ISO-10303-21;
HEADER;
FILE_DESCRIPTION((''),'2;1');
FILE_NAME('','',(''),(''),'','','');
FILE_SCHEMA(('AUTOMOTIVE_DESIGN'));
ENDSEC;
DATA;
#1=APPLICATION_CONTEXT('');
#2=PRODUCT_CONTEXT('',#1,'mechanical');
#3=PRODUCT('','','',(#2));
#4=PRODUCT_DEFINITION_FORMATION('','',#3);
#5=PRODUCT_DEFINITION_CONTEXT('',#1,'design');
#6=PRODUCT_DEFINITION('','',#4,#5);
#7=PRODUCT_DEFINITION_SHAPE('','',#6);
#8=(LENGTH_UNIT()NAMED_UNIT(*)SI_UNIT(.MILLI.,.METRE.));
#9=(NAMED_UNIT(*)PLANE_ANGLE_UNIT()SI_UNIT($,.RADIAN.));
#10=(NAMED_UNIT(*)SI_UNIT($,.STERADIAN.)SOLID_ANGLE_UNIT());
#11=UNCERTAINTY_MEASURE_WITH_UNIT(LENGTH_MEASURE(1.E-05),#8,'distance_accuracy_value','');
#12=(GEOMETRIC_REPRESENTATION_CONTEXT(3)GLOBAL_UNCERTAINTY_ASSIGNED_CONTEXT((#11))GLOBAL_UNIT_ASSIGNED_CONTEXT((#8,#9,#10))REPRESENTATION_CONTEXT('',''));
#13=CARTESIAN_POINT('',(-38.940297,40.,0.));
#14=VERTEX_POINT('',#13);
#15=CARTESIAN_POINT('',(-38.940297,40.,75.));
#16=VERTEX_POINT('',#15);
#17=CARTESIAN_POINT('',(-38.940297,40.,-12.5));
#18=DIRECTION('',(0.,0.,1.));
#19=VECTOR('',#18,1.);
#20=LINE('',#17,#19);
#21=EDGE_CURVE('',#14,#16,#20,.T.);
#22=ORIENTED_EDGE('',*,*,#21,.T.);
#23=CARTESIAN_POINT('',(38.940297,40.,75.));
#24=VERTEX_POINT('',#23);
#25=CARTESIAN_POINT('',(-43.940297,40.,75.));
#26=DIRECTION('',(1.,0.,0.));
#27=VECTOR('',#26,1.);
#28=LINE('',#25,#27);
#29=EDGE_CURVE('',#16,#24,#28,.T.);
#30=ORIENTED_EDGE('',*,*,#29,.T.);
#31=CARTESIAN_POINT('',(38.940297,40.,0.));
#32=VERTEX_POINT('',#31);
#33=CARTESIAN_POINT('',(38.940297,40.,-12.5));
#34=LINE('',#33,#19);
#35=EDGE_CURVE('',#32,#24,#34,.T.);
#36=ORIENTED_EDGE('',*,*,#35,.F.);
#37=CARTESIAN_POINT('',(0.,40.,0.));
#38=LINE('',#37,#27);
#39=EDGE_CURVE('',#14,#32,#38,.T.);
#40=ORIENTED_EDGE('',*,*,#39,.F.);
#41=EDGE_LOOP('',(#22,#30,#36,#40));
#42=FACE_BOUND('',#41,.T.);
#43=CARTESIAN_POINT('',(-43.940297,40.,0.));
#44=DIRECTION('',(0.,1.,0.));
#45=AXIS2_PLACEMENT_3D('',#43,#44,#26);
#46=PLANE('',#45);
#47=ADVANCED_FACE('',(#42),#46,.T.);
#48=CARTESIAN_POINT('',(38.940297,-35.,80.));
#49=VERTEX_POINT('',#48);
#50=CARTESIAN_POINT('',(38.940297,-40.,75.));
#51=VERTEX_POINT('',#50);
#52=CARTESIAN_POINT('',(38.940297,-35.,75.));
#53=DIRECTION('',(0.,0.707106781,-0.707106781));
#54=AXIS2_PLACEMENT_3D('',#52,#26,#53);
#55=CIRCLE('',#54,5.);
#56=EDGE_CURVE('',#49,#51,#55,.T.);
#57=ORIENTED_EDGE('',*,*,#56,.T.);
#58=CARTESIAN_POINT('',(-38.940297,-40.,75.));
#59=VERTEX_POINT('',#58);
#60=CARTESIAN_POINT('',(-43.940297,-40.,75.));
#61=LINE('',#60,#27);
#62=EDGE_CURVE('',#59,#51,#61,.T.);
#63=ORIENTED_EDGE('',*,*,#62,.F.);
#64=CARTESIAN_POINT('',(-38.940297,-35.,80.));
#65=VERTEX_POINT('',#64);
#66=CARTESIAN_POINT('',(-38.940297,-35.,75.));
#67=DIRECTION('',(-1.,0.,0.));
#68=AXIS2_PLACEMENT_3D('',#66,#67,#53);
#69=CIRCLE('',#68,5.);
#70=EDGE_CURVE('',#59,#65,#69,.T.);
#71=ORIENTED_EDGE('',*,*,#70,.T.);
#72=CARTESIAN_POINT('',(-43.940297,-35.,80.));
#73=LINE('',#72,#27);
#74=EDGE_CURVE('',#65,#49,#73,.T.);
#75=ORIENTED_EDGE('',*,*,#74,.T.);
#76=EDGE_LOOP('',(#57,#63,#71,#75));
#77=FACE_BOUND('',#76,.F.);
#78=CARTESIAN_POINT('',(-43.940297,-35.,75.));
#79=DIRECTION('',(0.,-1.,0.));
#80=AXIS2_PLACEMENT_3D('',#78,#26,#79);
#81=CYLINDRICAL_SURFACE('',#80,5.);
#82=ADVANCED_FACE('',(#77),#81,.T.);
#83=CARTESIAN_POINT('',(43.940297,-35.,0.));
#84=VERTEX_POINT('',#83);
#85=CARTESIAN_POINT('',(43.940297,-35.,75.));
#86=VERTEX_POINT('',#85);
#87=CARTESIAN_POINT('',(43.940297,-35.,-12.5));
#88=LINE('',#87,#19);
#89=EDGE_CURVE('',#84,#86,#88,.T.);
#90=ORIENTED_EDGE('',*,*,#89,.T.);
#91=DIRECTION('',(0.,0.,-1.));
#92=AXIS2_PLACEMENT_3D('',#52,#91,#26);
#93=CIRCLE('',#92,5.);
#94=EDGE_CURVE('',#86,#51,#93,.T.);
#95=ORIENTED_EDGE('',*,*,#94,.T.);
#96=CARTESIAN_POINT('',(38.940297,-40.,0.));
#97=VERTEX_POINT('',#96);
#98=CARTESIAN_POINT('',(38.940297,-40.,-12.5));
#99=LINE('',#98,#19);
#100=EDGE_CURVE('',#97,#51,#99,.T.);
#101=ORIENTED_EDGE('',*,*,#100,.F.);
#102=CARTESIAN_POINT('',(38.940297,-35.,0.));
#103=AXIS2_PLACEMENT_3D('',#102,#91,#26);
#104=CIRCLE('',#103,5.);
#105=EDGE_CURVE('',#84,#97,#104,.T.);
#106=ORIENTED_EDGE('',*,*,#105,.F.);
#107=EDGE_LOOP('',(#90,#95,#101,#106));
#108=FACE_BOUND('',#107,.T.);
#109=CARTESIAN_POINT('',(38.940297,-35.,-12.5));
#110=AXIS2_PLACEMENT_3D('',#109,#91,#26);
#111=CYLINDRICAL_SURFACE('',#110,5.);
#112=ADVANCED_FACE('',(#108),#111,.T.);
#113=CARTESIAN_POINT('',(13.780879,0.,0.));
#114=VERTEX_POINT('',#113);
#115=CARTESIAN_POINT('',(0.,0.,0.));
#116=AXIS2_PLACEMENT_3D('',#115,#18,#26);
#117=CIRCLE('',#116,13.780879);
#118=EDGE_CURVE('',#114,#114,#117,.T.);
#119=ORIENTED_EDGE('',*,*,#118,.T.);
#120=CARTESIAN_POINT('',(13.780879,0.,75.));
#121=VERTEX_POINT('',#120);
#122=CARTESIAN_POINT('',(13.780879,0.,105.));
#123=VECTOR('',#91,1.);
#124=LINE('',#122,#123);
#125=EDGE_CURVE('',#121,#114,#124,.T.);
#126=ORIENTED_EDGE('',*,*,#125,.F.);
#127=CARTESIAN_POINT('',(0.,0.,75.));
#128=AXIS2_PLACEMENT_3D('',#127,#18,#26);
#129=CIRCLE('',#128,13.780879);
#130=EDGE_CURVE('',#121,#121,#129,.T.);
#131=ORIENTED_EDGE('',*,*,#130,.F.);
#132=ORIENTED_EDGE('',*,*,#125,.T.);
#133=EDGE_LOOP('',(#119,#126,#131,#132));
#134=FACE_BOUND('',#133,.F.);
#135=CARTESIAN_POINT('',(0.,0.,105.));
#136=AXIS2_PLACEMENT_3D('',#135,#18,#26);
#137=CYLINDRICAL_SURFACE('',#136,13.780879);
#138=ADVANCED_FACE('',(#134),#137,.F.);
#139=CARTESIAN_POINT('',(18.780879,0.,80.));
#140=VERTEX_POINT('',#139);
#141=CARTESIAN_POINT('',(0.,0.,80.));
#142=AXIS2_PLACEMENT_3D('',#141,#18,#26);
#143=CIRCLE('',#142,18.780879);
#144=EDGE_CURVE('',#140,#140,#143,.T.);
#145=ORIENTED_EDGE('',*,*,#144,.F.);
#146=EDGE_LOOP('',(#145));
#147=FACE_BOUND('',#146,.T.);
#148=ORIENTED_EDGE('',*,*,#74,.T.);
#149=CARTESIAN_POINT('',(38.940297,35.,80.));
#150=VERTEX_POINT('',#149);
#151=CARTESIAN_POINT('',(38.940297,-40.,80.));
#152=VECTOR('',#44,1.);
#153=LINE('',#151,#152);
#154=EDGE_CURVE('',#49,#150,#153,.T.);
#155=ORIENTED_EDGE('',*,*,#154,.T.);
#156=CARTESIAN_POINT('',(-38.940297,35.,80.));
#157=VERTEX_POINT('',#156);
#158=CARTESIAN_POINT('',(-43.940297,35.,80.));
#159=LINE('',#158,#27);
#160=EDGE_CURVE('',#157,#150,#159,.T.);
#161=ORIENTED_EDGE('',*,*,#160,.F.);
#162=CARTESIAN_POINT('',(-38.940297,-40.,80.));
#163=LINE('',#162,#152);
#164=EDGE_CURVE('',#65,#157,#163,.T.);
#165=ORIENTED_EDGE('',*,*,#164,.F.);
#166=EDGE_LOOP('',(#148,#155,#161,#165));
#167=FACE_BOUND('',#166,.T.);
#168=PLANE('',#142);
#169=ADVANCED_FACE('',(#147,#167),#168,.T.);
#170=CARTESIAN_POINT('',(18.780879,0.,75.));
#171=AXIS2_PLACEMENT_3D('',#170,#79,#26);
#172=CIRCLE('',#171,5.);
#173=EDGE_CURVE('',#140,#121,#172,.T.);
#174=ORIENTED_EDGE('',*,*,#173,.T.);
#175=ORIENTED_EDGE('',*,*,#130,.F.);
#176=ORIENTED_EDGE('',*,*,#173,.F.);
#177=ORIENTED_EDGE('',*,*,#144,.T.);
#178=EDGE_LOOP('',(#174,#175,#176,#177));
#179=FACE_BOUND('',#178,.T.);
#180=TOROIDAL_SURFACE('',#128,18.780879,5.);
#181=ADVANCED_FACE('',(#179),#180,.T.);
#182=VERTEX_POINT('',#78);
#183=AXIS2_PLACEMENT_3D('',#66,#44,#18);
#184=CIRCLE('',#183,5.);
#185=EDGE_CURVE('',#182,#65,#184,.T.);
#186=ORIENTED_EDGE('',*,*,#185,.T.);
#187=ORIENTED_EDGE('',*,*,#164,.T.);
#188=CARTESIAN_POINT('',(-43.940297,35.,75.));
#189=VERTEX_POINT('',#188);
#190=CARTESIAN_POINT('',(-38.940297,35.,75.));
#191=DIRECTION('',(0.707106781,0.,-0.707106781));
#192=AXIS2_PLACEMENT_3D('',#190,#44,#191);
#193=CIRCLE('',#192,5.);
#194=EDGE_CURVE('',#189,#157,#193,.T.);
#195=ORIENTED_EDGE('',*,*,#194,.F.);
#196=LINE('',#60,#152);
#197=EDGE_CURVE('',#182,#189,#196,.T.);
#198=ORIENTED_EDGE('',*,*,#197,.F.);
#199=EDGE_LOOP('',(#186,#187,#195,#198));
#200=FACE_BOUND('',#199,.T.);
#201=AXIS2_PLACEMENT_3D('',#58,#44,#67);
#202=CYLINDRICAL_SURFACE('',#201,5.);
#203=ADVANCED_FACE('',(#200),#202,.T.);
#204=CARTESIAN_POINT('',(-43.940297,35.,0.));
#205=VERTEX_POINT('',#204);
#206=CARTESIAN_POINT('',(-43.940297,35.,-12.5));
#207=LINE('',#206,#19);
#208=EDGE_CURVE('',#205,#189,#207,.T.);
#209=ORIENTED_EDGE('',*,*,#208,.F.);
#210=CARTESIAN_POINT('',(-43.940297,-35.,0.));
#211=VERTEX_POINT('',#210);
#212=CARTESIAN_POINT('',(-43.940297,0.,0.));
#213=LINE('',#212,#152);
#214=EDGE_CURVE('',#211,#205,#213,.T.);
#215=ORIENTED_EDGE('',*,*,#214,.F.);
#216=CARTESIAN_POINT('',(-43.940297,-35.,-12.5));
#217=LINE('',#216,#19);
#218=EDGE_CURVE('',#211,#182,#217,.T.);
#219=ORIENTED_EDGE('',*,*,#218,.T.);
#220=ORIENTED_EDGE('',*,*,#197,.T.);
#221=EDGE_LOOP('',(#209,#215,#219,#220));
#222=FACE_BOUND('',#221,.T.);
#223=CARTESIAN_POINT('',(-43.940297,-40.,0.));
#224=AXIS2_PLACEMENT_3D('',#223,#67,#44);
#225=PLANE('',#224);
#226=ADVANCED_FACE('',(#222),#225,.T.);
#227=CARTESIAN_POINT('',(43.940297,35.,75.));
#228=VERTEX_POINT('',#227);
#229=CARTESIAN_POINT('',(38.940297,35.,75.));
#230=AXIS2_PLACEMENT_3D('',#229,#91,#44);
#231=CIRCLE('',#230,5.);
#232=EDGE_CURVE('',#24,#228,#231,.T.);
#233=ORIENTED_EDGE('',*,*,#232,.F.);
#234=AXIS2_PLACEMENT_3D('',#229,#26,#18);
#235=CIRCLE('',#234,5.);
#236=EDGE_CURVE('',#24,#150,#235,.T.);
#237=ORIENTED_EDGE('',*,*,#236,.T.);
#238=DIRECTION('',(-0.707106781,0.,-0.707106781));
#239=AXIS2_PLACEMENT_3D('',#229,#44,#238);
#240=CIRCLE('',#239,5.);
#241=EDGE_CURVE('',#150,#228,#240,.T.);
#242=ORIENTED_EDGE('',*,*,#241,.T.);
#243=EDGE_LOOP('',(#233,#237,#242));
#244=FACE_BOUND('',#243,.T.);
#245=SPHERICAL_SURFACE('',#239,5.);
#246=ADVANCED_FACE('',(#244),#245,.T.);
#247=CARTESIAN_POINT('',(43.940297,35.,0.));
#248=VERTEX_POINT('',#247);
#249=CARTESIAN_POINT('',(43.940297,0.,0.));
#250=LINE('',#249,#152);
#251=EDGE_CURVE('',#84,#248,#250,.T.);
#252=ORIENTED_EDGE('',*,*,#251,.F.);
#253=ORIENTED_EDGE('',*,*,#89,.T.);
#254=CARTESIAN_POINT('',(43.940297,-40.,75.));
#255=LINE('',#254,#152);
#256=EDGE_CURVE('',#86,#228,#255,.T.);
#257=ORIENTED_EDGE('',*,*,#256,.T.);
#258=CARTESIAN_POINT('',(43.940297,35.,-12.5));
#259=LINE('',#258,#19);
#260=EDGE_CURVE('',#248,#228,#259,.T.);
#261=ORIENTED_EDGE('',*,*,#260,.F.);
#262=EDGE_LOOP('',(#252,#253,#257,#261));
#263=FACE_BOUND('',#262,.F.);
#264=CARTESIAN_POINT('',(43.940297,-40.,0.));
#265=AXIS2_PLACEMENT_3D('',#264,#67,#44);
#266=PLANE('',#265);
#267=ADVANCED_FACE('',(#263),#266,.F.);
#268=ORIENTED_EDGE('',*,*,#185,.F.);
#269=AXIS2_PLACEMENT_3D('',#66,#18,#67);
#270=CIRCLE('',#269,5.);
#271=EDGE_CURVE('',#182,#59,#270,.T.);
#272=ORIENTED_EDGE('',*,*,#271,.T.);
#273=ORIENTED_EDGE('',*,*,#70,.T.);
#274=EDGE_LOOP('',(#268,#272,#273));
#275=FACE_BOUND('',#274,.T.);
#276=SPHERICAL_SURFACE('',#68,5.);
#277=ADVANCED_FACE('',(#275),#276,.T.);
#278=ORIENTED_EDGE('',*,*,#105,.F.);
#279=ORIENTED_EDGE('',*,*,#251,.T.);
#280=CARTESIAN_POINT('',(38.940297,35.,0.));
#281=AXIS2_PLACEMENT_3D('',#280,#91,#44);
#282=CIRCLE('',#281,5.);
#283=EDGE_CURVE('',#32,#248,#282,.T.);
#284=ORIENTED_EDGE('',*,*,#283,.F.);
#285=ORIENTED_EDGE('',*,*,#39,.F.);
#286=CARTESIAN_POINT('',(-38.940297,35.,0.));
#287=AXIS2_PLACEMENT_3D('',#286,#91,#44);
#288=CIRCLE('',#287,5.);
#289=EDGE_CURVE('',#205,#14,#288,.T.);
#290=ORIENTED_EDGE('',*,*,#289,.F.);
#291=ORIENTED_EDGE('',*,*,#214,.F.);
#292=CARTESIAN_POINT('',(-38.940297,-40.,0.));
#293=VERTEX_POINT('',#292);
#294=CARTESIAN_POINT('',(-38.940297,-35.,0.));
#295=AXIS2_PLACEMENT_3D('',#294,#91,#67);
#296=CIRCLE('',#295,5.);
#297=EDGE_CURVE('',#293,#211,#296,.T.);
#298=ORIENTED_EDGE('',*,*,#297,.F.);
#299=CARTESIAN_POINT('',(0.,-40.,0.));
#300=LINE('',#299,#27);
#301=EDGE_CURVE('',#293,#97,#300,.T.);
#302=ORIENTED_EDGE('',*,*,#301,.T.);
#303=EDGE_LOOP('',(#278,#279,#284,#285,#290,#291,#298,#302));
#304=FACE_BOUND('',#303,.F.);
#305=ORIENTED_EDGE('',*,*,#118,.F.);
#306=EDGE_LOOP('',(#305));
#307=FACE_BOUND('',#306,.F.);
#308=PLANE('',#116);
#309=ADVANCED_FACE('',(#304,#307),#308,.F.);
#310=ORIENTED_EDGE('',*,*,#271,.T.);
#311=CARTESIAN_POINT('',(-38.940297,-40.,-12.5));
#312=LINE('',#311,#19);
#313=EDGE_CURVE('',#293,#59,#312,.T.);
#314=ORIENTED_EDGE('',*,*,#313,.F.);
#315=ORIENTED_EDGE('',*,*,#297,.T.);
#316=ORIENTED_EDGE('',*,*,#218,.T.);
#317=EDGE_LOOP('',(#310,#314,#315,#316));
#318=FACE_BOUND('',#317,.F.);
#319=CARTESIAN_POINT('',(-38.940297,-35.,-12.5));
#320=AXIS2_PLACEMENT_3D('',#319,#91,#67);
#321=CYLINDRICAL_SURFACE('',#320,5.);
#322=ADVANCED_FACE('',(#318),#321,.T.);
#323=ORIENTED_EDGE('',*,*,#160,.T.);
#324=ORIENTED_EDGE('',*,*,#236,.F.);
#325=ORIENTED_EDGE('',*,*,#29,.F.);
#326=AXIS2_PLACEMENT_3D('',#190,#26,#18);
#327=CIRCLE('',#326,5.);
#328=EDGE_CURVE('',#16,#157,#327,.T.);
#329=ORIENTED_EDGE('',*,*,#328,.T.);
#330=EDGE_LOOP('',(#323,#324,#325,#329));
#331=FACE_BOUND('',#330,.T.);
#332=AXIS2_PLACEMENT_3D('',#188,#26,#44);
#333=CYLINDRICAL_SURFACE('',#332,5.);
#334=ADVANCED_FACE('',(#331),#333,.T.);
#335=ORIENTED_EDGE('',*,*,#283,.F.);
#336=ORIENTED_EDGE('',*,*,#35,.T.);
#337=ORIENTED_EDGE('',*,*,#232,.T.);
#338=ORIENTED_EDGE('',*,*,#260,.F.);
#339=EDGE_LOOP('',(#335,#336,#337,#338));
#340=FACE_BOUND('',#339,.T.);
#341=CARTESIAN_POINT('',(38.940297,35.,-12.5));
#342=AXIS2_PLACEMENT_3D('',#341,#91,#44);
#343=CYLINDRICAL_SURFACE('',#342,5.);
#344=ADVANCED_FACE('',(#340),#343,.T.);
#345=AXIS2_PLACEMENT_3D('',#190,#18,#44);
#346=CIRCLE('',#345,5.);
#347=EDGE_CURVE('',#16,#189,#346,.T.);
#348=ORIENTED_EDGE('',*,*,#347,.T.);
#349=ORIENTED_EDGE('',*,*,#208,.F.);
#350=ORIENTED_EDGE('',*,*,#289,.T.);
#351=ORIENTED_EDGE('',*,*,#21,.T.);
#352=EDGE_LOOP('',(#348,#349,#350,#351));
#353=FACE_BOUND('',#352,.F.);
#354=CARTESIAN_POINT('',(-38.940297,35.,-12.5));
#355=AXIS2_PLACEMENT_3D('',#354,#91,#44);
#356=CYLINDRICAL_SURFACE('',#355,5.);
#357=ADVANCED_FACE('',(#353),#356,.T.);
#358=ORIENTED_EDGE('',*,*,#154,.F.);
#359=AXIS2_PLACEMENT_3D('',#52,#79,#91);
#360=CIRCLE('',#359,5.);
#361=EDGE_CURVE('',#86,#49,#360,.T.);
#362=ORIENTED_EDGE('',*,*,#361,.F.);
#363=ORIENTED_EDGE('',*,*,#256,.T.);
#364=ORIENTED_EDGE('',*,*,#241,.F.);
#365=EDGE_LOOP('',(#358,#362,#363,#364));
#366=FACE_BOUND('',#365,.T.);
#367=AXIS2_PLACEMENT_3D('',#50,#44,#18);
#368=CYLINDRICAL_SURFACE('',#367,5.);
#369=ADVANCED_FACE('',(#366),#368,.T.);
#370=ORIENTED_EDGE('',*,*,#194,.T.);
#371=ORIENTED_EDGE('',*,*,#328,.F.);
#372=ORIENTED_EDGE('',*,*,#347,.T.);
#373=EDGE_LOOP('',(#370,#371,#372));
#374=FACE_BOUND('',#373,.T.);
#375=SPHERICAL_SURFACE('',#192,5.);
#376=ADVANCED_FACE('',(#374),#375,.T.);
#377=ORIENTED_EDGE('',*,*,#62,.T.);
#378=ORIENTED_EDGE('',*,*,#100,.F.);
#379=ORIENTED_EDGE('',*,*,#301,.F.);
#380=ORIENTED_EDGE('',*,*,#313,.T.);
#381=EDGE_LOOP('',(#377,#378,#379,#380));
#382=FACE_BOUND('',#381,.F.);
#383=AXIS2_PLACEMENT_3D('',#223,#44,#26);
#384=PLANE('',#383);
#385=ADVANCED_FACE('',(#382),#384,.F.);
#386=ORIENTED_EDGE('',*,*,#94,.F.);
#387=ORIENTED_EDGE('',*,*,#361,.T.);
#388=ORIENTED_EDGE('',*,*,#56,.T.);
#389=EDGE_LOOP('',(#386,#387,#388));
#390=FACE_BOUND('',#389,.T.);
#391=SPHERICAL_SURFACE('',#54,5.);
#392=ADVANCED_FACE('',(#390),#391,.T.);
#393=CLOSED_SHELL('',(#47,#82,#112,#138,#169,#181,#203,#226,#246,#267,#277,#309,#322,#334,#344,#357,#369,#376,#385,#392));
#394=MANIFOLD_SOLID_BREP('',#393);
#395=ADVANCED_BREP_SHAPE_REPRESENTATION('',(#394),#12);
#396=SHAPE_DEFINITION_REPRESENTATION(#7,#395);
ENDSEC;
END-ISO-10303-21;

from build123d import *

# Parameters (mm, degrees)
F0_W          = 87.8805932263
F0_H          = 80
F1_DEPTH      = 80
F2_R          = 13.7808794965
F3_DEPTH      = 25
F4_R          = 13.7808794965
F7_DEPTH      = 25
F5_R          = 13.7808794965
F8_DEPTH      = 25
F6_R          = 13.7808794965
F9_DEPTH      = 105.001
F10_R         = 5
F11_T1_DEPTH  = 87.5
F11_S5_W      = 5
F11_S5_H      = 5
F11_T6_DEPTH  = 5
F11_S11_W     = 5
F11_S11_H     = 5
F11_T12_DEPTH = 5
F11_S17_W     = 5
F11_S17_H     = 5
F11_T18_DEPTH = 5
F11_S23_W     = 5
F11_S23_H     = 5
F11_T24_DEPTH = 5


# Not quite as in the source:
# - a fillet or chamfer that OpenCascade refuses, or shapes differently, is made with other operations: its cross-section is extruded or revolved along the edge and cut away or added


with BuildPart() as f1:
    # F0 (on Top) → F1 (new body)
    with BuildSketch(Plane.XY):
        Rectangle(F0_W, F0_H)
    extrude(amount=F1_DEPTH)

    # F2 (on face) → F3 (join)
    with BuildSketch(Plane.XY.offset(80)):
        Circle(F2_R)
    extrude(amount=F3_DEPTH)

    # F4 (on face) → F7 (cut)
    with BuildSketch(Plane.XY.offset(105)):
        Circle(F4_R)
    extrude(amount=-F7_DEPTH, mode=Mode.SUBTRACT)

    # F5 (on face) → F8 (cut)
    with BuildSketch(Plane.XY):
        Circle(F5_R)
    extrude(amount=-F8_DEPTH, mode=Mode.SUBTRACT)

    # F6 (on face) → F9 (cut, through all)
    with BuildSketch(Plane.XY.offset(105)):
        Circle(F6_R)
    extrude(amount=-F9_DEPTH, mode=Mode.SUBTRACT)

    # F10
    f10_edges = [f1.edges().sort_by_distance(p)[0] for p in [
        (0, 40, 80),
        (43.940297, 0, 80),
        (-43.940297, 0, 80),
        (0, -40, 80),
        (-13.780879, 0, 80),
    ]]
    fillet(f10_edges, radius=F10_R)

    # F11: fillet of radius 5 on 15 edges, made by hand

    # F11_s2 → F11_t1 (cut)
    with BuildSketch(Plane.XY.offset(-12.5)):
        with BuildLine():
            ThreePointArc((-43.9402966131, -35), (-42.4758305191, -38.5355339059), (-38.9402966131, -40))
            Line((-38.9402966131, -40), (-43.9402966131, -40))
            Line((-43.9402966131, -40), (-43.9402966131, -35))
        make_face()
        with BuildLine():
            ThreePointArc((43.9402966131, -35), (42.4758305191, -38.5355339059), (38.9402966131, -40))
            Line((38.9402966131, -40), (43.9402966131, -40))
            Line((43.9402966131, -40), (43.9402966131, -35))
        make_face()
        with BuildLine():
            ThreePointArc((-38.9402966131, 40), (-42.4758305191, 38.5355339059), (-43.9402966131, 35))
            Line((-43.9402966131, 35), (-43.9402966131, 40))
            Line((-43.9402966131, 40), (-38.9402966131, 40))
        make_face()
        with BuildLine():
            ThreePointArc((38.9402966131, 40), (42.4758305191, 38.5355339059), (43.9402966131, 35))
            Line((43.9402966131, 35), (43.9402966131, 40))
            Line((43.9402966131, 40), (38.9402966131, 40))
        make_face()
    extrude(amount=F11_T1_DEPTH, mode=Mode.SUBTRACT)


with BuildPart() as f11_tool4:
    # F11_s5 → F11_t6 (new body)
    with BuildSketch(Plane.XZ.offset(-35)):
        with Locations((41.4402966131, 77.5)):
            Rectangle(F11_S5_W, F11_S5_H)
    extrude(amount=-F11_T6_DEPTH)

    # F11_s7 → F11_t8 (revolve, cut)
    with BuildSketch(Plane(origin=(38.9402966131, 35, 75), x_dir=(-0.7071067812, 0, -0.7071067812), z_dir=(0.7071067812, 0, -0.7071067812))):
        with BuildLine():
            ThreePointArc((0, -5), (5, 0), (0, 5))
            Line((0, 5), (0, -5))
        make_face()
    revolve(axis=Axis((38.9402966131, 35, 75), (0, 1, 0)), mode=Mode.SUBTRACT)


with BuildPart() as f1_1:
    add(f1.part)

    # F11_t3: cut F11_tool4
    add(f11_tool4.part, mode=Mode.SUBTRACT)


with BuildPart() as f11_tool10:
    # F11_s11 → F11_t12 (new body)
    with BuildSketch(Plane.XZ.offset(-35)):
        with Locations((-41.4402966131, 77.5)):
            Rectangle(F11_S11_W, F11_S11_H)
    extrude(amount=-F11_T12_DEPTH)

    # F11_s13 → F11_t14 (revolve, cut)
    with BuildSketch(Plane(origin=(-38.9402966131, 35, 75), x_dir=(0.7071067812, 0, -0.7071067812), z_dir=(0.7071067812, 0, 0.7071067812))):
        with BuildLine():
            ThreePointArc((0, -5), (5, 0), (0, 5))
            Line((0, 5), (0, -5))
        make_face()
    revolve(axis=Axis((-38.9402966131, 35, 75), (0, 1, 0)), mode=Mode.SUBTRACT)


with BuildPart() as f1_2:
    add(f1_1.part)

    # F11_t9: cut F11_tool10
    add(f11_tool10.part, mode=Mode.SUBTRACT)


with BuildPart() as f11_tool16:
    # F11_s17 → F11_t18 (new body)
    with BuildSketch(Plane.YZ.offset(38.9402966131)):
        with Locations((-37.5, 77.5)):
            Rectangle(F11_S17_W, F11_S17_H)
    extrude(amount=F11_T18_DEPTH)

    # F11_s19 → F11_t20 (revolve, cut)
    with BuildSketch(Plane(origin=(38.9402966131, -35, 75), x_dir=(0, 0.7071067812, -0.7071067812), z_dir=(0, -0.7071067812, -0.7071067812))):
        with BuildLine():
            ThreePointArc((0, -5), (5, 0), (0, 5))
            Line((0, 5), (0, -5))
        make_face()
    revolve(axis=Axis((38.9402966131, -35, 75), (1, 0, 0)), mode=Mode.SUBTRACT)


with BuildPart() as f1_3:
    add(f1_2.part)

    # F11_t15: cut F11_tool16
    add(f11_tool16.part, mode=Mode.SUBTRACT)


with BuildPart() as f11_tool22:
    # F11_s23 → F11_t24 (new body)
    with BuildSketch(Plane.YZ.offset(-38.9402966131)):
        with Locations((-37.5, 77.5)):
            Rectangle(F11_S23_W, F11_S23_H)
    extrude(amount=-F11_T24_DEPTH)

    # F11_s25 → F11_t26 (revolve, cut)
    with BuildSketch(Plane(origin=(-38.9402966131, -35, 75), x_dir=(0, 0.7071067812, -0.7071067812), z_dir=(0, 0.7071067812, 0.7071067812))):
        with BuildLine():
            ThreePointArc((0, -5), (5, 0), (0, 5))
            Line((0, 5), (0, -5))
        make_face()
    revolve(axis=Axis((-38.9402966131, -35, 75), (-1, 0, 0)), mode=Mode.SUBTRACT)


with BuildPart() as f1_4:
    add(f1_3.part)

    # F11_t21: cut F11_tool22
    add(f11_tool22.part, mode=Mode.SUBTRACT)


solid = f1_4.part
